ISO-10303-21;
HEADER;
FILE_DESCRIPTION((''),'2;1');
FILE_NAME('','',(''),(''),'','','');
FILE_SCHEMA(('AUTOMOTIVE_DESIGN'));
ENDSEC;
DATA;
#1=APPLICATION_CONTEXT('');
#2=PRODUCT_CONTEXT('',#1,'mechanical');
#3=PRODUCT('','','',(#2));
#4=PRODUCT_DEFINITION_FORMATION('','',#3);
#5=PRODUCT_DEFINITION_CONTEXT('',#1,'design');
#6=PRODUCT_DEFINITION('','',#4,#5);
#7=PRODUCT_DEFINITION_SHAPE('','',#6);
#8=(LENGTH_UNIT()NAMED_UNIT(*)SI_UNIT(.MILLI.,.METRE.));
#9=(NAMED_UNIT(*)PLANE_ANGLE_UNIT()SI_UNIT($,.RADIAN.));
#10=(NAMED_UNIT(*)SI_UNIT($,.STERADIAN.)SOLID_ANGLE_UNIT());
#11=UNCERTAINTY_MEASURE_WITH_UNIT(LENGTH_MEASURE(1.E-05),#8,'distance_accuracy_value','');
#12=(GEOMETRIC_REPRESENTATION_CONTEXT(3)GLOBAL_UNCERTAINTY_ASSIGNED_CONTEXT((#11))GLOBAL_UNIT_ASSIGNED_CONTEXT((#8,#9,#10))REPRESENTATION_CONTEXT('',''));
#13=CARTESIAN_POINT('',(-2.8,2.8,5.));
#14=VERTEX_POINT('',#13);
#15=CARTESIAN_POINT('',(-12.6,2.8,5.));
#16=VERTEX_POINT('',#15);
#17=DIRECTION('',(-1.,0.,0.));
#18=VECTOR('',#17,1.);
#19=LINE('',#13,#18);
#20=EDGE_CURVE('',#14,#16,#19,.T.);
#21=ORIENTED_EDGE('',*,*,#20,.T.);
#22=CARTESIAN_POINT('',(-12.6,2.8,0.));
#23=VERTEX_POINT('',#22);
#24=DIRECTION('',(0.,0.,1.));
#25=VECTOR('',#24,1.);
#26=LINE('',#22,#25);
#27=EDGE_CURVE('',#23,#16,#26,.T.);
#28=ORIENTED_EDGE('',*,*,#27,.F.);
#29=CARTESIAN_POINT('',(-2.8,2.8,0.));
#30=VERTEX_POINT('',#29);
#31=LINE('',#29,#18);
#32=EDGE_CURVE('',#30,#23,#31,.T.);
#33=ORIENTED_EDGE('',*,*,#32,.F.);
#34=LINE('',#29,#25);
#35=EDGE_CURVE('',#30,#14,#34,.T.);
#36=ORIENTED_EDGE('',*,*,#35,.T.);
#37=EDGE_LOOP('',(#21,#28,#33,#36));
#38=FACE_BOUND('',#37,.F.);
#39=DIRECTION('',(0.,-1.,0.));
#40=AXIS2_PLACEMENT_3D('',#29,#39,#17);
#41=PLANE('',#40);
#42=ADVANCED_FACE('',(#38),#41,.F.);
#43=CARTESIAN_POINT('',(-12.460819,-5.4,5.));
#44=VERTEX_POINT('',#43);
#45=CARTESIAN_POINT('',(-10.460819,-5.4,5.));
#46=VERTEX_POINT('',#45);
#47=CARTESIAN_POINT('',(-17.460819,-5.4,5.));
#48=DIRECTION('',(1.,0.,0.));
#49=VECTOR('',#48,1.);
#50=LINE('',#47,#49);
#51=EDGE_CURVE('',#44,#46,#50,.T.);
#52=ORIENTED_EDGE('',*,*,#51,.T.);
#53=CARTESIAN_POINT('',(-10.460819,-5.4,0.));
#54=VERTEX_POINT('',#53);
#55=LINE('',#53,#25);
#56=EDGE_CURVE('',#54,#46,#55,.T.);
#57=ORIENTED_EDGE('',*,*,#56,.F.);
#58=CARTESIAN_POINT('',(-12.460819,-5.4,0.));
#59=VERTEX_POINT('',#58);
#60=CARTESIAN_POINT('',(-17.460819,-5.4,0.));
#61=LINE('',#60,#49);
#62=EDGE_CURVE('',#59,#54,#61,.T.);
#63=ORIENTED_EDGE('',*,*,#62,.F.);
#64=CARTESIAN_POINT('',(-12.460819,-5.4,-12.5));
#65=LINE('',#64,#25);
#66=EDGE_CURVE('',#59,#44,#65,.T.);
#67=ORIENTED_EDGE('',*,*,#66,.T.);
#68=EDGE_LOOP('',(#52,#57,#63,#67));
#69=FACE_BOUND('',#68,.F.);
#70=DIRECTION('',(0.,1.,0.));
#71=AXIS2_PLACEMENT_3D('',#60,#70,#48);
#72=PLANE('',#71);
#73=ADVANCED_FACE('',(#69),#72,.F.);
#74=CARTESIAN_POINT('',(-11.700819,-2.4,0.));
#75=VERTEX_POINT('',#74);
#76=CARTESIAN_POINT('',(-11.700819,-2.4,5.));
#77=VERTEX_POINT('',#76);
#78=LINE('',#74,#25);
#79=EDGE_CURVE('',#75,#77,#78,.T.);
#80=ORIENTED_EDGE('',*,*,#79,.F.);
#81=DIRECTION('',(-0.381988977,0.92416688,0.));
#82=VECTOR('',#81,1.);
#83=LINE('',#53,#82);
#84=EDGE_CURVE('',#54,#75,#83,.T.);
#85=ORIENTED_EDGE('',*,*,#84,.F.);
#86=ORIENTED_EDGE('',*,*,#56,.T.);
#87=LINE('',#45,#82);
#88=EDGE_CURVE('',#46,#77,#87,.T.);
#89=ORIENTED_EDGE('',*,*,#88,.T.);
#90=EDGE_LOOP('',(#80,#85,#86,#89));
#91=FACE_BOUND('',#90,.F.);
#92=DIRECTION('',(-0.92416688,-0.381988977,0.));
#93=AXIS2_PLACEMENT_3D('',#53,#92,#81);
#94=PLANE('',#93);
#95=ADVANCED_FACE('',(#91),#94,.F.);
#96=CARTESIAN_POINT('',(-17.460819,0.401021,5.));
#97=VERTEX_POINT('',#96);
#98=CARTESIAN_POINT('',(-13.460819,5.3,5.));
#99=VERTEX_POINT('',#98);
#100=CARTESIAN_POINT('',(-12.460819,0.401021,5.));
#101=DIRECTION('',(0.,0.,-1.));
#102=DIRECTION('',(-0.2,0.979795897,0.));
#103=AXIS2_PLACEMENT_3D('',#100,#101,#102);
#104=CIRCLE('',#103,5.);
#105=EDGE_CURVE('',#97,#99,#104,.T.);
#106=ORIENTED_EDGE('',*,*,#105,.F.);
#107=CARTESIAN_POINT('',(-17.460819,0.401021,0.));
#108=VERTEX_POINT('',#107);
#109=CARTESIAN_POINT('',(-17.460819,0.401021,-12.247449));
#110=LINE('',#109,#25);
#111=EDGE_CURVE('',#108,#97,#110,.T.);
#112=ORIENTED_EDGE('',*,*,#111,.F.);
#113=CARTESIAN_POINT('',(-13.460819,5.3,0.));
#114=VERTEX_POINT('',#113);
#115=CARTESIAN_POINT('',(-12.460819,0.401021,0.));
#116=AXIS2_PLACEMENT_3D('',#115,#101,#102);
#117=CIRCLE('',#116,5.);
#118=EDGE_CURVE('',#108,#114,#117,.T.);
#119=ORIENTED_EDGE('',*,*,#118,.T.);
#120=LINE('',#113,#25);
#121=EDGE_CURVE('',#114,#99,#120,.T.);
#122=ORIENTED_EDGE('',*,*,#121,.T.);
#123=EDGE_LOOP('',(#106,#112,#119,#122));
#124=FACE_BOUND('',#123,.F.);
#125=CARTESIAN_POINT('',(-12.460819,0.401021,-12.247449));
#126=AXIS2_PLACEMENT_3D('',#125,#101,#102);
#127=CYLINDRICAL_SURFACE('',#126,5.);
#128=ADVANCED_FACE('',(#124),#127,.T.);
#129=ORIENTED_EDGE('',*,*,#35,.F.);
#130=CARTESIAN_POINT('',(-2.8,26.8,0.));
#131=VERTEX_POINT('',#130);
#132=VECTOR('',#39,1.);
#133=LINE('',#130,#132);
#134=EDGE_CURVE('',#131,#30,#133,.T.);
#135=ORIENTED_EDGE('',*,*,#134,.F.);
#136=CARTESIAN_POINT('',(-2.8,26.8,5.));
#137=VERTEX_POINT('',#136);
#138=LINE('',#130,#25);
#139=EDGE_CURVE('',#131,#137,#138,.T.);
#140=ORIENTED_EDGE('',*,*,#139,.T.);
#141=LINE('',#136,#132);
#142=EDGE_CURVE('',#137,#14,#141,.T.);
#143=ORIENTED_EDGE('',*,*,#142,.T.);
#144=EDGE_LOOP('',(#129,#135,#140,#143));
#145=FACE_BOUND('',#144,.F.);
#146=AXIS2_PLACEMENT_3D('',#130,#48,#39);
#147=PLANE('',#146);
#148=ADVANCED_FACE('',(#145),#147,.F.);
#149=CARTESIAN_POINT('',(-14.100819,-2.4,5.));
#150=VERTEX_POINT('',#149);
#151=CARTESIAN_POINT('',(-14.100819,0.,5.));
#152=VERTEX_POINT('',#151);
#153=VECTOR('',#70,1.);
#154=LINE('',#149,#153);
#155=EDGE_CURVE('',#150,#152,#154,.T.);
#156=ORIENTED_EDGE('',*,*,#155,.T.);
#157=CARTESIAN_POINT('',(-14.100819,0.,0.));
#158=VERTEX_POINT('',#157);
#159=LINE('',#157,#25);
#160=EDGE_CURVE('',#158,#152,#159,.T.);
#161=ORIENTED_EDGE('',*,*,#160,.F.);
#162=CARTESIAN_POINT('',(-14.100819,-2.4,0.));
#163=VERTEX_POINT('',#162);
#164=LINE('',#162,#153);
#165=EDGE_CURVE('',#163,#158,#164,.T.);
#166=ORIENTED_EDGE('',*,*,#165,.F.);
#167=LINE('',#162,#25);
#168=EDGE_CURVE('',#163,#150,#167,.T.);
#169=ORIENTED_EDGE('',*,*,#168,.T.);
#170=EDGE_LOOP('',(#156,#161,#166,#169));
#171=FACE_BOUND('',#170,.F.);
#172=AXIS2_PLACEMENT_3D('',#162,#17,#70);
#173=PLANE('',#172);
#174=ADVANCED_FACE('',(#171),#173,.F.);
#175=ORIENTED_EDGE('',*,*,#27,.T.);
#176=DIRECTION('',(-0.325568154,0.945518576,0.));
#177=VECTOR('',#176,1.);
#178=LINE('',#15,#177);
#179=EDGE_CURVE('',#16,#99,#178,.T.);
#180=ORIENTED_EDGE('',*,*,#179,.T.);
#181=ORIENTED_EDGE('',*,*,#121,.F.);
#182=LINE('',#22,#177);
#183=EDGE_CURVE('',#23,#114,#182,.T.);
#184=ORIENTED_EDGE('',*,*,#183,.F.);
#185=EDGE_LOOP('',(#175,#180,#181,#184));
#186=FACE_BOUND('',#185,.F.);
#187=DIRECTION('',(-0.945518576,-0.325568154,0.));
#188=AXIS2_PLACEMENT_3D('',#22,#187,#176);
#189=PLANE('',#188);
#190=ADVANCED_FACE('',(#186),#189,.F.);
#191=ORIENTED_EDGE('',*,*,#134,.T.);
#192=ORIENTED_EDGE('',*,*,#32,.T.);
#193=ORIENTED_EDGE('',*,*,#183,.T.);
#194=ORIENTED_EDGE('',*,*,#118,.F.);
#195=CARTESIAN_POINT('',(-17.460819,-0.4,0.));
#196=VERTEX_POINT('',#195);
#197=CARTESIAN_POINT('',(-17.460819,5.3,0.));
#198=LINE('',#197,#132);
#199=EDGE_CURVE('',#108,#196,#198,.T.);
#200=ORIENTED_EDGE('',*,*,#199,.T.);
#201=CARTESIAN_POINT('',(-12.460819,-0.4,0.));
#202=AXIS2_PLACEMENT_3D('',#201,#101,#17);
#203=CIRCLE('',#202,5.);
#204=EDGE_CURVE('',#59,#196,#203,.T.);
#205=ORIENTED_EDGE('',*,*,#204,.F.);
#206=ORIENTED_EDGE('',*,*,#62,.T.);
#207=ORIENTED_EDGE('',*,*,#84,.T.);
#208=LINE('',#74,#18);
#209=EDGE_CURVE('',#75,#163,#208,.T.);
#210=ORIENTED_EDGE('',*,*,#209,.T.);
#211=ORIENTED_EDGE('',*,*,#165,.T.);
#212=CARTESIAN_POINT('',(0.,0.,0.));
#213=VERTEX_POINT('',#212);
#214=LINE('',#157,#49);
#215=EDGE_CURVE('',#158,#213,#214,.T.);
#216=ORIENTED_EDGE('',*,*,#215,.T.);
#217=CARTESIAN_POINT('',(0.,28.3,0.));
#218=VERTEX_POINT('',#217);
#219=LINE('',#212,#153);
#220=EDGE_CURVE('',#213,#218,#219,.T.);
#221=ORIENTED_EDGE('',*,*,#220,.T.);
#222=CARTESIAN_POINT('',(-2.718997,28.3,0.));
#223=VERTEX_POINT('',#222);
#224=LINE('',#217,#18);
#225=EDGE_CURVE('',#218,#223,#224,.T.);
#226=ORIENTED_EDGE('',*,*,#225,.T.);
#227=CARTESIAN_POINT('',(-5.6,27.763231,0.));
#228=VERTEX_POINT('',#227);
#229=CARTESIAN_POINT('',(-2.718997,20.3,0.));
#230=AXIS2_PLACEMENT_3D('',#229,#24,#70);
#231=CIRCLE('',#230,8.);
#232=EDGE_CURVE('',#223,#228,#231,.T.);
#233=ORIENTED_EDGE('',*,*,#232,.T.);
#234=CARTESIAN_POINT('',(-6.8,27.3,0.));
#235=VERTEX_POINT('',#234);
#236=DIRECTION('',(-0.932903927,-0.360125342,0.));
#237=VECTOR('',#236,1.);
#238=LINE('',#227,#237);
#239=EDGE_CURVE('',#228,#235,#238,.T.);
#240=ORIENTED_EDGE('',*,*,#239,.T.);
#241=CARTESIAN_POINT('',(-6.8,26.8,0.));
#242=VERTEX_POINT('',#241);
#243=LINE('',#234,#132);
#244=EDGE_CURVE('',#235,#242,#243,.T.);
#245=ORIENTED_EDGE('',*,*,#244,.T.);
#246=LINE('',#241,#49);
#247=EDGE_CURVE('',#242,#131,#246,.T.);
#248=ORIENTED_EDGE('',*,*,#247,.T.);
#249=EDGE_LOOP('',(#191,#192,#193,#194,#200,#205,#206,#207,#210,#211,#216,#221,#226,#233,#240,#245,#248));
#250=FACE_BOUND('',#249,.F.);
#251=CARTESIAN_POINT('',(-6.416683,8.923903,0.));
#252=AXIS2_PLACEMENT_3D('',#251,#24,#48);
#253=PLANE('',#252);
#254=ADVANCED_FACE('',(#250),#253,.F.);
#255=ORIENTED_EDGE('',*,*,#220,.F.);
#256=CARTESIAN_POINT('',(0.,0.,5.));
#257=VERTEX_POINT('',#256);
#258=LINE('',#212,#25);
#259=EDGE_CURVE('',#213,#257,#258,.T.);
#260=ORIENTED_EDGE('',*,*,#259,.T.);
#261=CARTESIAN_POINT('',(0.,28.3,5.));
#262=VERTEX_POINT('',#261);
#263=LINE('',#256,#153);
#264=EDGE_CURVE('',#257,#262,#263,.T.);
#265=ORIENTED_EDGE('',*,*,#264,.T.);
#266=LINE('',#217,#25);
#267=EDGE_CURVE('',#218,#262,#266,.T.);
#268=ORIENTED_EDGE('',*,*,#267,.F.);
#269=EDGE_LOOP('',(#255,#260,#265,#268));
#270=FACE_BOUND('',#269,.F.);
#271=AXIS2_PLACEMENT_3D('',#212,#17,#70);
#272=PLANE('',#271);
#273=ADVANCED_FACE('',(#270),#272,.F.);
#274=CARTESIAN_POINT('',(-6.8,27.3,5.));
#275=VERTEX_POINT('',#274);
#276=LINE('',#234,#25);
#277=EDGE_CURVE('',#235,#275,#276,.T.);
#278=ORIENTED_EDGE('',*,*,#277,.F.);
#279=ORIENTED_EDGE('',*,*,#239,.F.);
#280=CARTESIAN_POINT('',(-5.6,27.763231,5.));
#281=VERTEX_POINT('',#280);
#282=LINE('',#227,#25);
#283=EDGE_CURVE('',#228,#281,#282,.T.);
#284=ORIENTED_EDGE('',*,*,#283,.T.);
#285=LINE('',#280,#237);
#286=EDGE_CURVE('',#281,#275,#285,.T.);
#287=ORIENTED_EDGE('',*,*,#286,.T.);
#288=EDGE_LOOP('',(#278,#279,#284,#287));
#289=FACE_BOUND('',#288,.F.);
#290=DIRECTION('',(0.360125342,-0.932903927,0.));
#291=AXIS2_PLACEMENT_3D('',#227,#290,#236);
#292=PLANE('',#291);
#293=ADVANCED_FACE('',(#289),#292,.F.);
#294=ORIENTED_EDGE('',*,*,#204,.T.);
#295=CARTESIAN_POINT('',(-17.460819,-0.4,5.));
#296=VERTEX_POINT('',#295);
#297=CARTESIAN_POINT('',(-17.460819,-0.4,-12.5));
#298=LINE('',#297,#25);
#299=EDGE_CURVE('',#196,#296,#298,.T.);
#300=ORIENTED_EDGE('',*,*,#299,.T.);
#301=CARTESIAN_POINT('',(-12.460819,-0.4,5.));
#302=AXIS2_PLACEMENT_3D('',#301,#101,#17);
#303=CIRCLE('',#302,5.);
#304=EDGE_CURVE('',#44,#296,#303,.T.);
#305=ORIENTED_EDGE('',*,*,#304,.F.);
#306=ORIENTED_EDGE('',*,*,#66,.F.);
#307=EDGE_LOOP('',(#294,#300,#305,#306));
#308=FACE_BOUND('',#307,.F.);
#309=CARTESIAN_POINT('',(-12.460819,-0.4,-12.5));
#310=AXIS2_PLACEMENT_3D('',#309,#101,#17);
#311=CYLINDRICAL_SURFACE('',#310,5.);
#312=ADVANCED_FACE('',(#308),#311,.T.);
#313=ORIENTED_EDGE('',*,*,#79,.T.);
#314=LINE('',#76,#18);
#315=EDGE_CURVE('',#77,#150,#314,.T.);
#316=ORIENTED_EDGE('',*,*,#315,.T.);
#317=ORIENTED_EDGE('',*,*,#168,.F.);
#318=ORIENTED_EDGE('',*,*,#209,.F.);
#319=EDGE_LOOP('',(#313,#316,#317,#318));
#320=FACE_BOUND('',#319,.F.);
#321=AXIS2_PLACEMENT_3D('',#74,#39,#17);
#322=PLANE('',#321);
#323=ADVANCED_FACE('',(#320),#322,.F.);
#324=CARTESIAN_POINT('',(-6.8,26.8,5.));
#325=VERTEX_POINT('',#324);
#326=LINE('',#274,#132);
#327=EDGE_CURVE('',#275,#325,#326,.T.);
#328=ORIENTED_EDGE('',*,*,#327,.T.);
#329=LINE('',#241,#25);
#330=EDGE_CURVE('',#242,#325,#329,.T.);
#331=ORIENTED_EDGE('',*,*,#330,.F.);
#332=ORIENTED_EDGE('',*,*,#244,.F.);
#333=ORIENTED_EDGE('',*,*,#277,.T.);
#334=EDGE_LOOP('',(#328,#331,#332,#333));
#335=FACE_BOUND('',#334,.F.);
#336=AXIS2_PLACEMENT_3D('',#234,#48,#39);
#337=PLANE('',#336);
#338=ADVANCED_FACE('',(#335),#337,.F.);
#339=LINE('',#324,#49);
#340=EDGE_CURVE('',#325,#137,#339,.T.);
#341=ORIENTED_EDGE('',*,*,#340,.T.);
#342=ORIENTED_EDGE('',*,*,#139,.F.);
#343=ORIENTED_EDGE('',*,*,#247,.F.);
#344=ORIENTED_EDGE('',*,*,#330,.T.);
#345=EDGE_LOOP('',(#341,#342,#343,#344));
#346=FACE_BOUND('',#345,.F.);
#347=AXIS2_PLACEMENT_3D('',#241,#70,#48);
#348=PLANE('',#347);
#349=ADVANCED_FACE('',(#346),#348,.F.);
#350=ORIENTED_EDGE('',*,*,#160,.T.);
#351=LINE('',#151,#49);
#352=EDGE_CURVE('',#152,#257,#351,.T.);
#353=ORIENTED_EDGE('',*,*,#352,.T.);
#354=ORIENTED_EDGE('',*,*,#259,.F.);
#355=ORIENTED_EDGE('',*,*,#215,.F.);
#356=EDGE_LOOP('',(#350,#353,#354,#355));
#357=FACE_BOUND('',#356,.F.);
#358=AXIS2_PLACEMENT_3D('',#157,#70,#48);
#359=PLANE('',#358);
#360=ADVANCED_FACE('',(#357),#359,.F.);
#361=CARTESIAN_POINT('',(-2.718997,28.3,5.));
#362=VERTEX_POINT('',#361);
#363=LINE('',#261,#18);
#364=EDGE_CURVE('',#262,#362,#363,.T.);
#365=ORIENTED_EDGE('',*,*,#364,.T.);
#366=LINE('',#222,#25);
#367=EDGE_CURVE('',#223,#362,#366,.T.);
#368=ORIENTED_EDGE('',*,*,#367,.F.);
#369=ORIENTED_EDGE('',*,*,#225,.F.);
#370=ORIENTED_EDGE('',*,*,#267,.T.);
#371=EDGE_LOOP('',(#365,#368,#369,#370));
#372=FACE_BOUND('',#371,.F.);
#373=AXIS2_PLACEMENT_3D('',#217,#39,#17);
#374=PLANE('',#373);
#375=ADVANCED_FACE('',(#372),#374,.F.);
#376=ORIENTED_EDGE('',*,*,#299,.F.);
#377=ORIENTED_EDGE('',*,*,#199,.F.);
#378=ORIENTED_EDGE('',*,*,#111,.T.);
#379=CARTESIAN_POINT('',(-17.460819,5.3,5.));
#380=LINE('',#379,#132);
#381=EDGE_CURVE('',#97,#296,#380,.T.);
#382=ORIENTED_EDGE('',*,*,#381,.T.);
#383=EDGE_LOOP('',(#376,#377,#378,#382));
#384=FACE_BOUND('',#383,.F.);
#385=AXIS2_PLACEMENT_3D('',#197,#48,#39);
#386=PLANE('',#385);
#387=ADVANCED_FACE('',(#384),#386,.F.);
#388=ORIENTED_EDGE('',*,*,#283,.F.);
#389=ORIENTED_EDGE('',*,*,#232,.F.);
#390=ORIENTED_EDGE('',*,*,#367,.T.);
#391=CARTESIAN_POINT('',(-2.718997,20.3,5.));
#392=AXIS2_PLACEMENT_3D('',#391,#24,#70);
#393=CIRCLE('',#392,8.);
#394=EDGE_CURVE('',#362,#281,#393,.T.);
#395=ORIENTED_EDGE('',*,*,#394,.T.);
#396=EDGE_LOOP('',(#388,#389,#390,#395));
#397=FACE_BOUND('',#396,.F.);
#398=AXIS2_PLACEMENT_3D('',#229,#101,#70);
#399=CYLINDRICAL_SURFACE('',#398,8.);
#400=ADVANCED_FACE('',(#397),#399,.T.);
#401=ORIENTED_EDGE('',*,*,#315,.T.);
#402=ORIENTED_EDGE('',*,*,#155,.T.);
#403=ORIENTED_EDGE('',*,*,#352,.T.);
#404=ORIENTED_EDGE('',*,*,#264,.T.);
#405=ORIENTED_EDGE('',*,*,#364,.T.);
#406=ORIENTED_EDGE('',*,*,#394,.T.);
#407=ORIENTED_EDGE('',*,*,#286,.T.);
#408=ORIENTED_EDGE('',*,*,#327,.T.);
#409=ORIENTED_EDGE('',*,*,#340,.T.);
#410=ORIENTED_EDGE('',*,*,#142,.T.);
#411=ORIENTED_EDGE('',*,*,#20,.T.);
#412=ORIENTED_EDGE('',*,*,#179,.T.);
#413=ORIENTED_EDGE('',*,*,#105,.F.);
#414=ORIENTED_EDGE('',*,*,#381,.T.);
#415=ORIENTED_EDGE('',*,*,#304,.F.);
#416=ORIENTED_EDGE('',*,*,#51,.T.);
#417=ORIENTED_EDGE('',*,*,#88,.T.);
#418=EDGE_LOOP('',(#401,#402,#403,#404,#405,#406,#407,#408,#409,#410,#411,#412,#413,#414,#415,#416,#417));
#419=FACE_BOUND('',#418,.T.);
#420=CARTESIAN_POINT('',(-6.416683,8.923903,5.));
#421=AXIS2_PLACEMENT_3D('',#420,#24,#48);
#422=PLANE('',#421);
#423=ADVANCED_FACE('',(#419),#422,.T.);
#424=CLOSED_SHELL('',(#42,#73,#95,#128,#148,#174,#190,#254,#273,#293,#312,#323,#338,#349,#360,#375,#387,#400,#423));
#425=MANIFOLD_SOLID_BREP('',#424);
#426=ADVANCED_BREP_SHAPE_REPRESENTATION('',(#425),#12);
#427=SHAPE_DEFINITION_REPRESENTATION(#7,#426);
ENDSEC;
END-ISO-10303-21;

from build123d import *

# Parameters (mm, degrees)
F1_DEPTH    = 5
F2_T1_DEPTH = 29.4948974279
F2_T3_DEPTH = 30


# Not quite as in the source:
# - a fillet or chamfer that OpenCascade refuses, or shapes differently, is made with other operations: its cross-section is extruded or revolved along the edge and cut away or added


with BuildPart() as f1:
    # F0 (on Top) → F1 (new body)
    with BuildSketch(Plane.XY):
        with BuildLine():
            Line((-17.4608190332, -5.4), (-10.4608190332, -5.4))
            Line((-10.4608190332, -5.4), (-11.7008190332, -2.4))
            Line((-11.7008190332, -2.4), (-14.1008190332, -2.4))
            Line((-14.1008190332, -2.4), (-14.1008190332, 0))
            Line((-14.1008190332, 0), (0, 0))
            Line((0, 0), (0, 28.3))
            Line((0, 28.3), (-2.7189972619, 28.3))
            ThreePointArc((-2.7189972619, 28.3), (-4.184287104, 28.1646631001), (-5.6, 27.7632314196))
            Line((-5.6, 27.7632314196), (-6.8, 27.3))
            Line((-6.8, 27.3), (-6.8, 26.8))
            Line((-6.8, 26.8), (-2.8, 26.8))
            Line((-2.8, 26.8), (-2.8, 2.8))
            Line((-2.8, 2.8), (-12.6, 2.8))
            Line((-12.6, 2.8), (-13.4608190332, 5.3))
            Line((-13.4608190332, 5.3), (-17.4608190332, 5.3))
            Line((-17.4608190332, 5.3), (-17.4608190332, -5.4))
        make_face()
    extrude(amount=F1_DEPTH)

    # F2: fillet of radius 5 on 2 edges, made by hand

    # F2_s2 → F2_t1 (cut)
    with BuildSketch(Plane.XY.offset(-12.2474487139)):
        with BuildLine():
            ThreePointArc((-13.4608190332, 5.3), (-16.3338023794, 3.5632981746), (-17.4608190332, 0.4010205144))
            Line((-17.4608190332, 0.4010205144), (-17.4608190332, 5.3))
            Line((-17.4608190332, 5.3), (-13.4608190332, 5.3))
        make_face()
    extrude(amount=F2_T1_DEPTH, mode=Mode.SUBTRACT)

    # F2_s4 → F2_t3 (cut)
    with BuildSketch(Plane.XY.offset(-12.5)):
        with BuildLine():
            ThreePointArc((-17.4608190332, -0.4), (-15.9963529392, -3.9355339059), (-12.4608190332, -5.4))
            Line((-12.4608190332, -5.4), (-17.4608190332, -5.4))
            Line((-17.4608190332, -5.4), (-17.4608190332, -0.4))
        make_face()
    extrude(amount=F2_T3_DEPTH, mode=Mode.SUBTRACT)


solid = f1.part
